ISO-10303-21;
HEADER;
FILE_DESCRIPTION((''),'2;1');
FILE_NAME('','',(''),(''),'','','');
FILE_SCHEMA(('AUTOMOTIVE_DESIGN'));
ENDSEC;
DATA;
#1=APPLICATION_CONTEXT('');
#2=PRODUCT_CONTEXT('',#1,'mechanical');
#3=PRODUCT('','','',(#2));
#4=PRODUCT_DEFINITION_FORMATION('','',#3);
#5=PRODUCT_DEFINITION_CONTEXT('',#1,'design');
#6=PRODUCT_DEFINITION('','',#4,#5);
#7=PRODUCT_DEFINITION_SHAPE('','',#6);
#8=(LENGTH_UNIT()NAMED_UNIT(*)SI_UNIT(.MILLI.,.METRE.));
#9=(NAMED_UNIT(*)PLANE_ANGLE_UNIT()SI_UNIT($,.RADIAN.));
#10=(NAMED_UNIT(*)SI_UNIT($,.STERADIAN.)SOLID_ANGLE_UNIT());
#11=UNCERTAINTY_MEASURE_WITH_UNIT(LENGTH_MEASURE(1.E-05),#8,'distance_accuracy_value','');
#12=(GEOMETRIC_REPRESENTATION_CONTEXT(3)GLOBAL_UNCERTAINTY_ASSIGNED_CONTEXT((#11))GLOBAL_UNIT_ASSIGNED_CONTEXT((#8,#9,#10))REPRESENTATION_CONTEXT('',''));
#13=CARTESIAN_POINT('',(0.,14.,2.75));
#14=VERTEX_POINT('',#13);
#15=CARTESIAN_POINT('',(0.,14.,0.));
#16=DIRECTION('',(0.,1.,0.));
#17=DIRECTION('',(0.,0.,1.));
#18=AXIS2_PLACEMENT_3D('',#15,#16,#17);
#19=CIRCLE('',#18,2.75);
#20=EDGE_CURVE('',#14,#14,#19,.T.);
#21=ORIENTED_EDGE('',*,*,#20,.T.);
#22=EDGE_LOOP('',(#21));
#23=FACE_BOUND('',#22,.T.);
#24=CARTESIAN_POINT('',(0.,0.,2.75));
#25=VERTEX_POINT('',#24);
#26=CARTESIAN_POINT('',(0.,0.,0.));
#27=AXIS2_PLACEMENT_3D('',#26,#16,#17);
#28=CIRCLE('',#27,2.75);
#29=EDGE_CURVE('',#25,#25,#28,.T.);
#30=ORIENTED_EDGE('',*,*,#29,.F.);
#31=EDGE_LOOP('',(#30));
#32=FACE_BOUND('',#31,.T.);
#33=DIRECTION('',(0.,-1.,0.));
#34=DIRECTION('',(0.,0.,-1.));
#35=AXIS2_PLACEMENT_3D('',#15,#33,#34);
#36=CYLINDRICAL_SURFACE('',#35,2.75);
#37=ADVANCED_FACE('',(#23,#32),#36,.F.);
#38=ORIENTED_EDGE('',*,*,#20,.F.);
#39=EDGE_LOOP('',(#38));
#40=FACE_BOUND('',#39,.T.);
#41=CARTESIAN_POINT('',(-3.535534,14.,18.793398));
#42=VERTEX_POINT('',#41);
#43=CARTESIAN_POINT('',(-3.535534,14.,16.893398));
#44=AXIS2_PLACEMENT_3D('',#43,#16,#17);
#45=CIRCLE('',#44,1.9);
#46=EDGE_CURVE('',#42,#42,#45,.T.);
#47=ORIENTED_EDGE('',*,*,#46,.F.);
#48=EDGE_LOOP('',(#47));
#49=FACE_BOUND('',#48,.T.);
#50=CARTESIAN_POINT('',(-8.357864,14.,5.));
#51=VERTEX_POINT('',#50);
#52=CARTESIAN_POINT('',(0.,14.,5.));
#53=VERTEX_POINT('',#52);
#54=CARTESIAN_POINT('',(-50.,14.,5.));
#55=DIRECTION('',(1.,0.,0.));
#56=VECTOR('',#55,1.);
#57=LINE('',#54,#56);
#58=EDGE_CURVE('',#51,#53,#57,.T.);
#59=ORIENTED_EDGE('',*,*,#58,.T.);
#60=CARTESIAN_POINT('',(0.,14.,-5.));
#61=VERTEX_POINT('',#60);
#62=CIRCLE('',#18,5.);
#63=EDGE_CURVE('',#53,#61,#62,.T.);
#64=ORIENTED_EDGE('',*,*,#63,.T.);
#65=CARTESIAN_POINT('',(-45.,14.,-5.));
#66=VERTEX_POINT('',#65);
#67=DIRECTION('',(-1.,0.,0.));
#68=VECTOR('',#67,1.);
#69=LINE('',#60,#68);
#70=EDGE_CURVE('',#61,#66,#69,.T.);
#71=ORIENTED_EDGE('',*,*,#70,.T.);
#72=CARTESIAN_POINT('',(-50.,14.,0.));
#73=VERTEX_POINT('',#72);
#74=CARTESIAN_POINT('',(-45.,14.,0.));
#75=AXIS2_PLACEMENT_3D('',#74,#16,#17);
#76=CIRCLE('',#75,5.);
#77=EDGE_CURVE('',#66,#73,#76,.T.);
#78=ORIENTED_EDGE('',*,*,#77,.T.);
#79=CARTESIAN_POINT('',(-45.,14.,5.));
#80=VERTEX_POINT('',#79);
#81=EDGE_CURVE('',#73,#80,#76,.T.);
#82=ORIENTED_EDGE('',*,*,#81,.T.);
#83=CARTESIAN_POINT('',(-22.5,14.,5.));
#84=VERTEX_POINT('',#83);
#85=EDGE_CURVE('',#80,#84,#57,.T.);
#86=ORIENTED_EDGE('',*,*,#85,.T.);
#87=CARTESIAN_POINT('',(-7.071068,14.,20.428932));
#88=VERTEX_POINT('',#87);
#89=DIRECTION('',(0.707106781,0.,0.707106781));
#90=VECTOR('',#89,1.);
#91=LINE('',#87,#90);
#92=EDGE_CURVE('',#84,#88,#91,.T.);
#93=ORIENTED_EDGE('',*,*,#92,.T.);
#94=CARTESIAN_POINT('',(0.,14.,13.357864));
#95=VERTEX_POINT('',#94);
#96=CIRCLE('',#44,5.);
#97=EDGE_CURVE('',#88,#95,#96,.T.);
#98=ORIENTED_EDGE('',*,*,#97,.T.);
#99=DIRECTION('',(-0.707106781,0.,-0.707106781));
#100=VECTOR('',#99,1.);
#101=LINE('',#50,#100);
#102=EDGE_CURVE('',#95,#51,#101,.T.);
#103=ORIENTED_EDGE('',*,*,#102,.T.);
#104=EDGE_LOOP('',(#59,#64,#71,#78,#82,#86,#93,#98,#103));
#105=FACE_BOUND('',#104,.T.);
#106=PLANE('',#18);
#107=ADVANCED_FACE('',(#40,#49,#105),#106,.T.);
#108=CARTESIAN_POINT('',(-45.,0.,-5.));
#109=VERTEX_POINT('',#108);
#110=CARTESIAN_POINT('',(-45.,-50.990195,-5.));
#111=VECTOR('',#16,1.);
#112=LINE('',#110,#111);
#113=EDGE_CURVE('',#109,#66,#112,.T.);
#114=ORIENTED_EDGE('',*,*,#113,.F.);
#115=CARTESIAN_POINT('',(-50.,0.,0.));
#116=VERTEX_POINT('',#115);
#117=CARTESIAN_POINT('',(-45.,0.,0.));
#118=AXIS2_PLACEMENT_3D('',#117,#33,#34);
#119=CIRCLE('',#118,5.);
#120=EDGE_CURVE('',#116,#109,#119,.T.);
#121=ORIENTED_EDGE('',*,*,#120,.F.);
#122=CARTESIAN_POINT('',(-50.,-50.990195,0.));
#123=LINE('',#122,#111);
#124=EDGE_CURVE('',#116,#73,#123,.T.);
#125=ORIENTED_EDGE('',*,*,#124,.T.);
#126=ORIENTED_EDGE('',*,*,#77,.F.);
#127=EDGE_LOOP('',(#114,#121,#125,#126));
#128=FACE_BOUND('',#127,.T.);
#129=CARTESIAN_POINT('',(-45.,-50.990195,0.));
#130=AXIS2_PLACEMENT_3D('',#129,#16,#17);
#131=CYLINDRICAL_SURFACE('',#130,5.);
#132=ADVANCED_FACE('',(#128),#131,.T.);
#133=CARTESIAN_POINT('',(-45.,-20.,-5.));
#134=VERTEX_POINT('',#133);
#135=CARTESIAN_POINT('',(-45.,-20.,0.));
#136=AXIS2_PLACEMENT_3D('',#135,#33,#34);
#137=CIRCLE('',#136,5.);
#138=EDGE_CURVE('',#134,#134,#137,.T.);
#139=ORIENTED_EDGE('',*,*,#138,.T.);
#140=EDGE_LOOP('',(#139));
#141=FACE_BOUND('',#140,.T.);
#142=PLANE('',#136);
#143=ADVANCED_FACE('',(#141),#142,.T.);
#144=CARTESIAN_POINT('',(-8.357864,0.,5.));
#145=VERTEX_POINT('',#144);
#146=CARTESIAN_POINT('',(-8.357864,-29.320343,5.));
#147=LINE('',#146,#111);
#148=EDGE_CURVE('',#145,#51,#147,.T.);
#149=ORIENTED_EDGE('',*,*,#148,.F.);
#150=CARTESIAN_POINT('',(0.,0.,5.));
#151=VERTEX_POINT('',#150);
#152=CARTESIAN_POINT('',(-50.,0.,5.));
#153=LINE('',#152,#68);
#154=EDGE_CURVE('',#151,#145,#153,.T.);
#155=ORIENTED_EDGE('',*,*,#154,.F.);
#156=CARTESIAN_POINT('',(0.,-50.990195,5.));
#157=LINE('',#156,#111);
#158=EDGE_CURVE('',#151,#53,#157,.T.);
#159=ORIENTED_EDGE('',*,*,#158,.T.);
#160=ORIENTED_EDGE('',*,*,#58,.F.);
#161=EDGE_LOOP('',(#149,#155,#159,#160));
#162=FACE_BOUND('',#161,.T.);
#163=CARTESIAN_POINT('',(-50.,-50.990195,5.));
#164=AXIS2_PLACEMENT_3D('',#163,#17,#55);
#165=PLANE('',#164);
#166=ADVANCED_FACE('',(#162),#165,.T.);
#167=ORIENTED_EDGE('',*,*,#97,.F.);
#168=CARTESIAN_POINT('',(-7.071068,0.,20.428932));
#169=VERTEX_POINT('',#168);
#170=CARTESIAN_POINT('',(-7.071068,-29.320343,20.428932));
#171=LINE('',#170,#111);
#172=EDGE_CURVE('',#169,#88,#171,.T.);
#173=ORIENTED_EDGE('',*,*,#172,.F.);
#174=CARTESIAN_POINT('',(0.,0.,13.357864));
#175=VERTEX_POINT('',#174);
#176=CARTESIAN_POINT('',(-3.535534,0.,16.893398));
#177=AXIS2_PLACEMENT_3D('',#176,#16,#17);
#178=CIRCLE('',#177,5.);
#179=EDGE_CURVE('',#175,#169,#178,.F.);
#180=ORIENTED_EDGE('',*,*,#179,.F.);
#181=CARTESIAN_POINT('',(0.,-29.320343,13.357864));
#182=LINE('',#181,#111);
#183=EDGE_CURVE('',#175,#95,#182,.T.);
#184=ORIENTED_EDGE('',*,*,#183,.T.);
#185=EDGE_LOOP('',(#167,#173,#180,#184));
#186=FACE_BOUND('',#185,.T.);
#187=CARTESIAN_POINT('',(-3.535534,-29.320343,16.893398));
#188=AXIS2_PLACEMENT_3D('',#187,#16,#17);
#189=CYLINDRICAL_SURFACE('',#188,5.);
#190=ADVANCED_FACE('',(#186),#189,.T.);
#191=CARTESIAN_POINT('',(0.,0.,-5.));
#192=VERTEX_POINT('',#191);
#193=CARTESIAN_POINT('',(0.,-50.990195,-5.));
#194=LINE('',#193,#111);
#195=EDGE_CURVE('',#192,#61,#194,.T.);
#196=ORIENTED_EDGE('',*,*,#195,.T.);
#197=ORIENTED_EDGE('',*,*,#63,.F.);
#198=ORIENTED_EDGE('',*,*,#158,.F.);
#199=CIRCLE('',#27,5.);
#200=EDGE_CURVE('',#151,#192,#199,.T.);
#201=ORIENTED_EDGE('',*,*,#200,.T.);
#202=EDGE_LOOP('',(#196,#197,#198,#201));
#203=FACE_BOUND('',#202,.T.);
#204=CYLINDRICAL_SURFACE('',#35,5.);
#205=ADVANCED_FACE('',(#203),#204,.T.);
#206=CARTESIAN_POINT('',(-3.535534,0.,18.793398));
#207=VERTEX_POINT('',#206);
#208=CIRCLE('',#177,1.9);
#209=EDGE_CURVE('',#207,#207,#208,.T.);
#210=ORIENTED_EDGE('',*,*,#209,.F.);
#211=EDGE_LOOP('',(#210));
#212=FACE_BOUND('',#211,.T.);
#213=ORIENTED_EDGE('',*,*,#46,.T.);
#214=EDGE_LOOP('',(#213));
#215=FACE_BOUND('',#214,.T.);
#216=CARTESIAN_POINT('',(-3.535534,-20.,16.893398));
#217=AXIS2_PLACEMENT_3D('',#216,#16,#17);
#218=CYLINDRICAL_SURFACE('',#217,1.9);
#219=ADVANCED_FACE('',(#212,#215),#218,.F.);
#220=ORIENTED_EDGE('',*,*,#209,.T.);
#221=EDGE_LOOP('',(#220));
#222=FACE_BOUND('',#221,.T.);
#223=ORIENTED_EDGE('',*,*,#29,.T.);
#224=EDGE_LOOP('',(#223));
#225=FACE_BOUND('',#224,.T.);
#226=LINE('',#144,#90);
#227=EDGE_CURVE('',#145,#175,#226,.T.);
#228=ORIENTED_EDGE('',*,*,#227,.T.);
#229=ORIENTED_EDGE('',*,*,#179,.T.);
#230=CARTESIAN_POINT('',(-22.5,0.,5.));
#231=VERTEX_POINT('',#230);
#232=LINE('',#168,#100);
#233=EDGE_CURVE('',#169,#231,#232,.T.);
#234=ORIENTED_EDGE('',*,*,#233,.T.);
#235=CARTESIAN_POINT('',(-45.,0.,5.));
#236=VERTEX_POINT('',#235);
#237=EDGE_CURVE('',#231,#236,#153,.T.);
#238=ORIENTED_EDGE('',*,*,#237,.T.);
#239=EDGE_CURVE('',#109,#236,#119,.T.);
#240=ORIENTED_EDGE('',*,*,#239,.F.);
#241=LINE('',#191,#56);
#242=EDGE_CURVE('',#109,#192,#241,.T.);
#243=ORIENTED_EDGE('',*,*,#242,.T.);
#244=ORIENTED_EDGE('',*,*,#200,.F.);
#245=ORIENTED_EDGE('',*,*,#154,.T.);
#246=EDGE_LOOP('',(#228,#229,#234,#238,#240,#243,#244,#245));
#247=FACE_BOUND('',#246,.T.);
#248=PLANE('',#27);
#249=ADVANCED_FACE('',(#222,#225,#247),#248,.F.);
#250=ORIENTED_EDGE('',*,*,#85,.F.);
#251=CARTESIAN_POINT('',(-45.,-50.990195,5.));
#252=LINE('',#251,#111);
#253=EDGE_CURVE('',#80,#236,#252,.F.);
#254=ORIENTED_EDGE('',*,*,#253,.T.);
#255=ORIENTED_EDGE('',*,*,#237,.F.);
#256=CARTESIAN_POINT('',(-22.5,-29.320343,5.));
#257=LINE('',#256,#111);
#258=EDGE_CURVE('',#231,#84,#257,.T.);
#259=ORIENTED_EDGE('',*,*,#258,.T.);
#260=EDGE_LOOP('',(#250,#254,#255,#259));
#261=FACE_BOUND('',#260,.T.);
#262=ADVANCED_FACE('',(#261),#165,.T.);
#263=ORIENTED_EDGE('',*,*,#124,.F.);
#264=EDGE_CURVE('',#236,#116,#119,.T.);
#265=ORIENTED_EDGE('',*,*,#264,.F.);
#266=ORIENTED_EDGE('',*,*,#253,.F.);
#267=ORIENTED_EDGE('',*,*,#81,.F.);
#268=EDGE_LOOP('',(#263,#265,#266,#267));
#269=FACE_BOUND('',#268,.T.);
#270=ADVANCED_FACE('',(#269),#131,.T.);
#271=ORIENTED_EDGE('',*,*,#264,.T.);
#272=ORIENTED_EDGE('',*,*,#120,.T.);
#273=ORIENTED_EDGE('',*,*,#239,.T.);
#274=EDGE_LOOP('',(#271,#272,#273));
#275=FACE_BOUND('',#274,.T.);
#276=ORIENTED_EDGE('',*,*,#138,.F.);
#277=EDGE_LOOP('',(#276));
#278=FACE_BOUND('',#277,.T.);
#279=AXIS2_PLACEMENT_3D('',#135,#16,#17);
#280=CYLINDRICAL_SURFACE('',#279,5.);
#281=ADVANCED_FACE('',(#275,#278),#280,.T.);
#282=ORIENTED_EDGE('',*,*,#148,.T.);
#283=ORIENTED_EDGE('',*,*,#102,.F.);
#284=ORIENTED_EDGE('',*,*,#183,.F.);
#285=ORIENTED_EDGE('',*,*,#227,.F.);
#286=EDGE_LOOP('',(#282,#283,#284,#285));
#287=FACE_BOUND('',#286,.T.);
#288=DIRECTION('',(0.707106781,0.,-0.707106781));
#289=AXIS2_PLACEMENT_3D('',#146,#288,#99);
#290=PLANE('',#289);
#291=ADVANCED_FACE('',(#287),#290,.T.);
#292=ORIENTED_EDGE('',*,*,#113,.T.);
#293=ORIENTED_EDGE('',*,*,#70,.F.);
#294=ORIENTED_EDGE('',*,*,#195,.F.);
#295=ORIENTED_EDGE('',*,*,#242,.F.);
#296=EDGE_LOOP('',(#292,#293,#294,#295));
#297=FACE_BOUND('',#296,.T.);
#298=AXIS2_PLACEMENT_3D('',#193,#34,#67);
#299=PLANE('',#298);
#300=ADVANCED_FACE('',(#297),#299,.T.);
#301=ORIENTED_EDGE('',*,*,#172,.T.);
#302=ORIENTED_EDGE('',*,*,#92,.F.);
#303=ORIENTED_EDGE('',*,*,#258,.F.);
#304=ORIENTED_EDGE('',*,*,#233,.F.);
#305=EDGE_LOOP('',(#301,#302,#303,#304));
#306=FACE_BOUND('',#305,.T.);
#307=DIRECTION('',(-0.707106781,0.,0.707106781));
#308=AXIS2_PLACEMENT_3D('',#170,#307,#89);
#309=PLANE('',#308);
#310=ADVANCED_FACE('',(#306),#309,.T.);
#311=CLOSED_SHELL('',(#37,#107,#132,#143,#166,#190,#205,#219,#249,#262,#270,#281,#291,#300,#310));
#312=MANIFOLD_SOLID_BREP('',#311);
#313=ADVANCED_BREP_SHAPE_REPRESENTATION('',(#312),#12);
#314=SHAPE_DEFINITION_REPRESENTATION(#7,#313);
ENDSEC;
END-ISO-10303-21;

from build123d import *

# Parameters (mm, degrees)
SKETCH1_R           = 5
SKETCH1_R_2         = 2.75
BOSS_EXTRUDE1_DEPTH = 14
BOSS_EXTRUDE2_START = -14
BOSS_EXTRUDE2_DEPTH = 14
SKETCH3_R           = 5
BOSS_EXTRUDE3_DEPTH = 20
FILLET2_R           = 5
BOSS_EXTRUDE4_DEPTH = 14
SKETCH5_R           = 1.9
CUT_EXTRUDE1_DEPTH  = 65.306460705


with BuildPart() as part:
    # Sketch1 → Boss-Extrude1 (new body)
    with BuildSketch(Plane(origin=(0, 0, 0), x_dir=(1, 0, 0), z_dir=(0, 1, 0))):
        with Locations(Location((0, 0, 0), (0, 0, 270))):
            Circle(SKETCH1_R)
        with Locations(Location((0, 0, 0), (0, 0, 270))):
            Circle(SKETCH1_R_2, mode=Mode.SUBTRACT)
    extrude(amount=BOSS_EXTRUDE1_DEPTH)

    # Sketch2 → Boss-Extrude2 (add)
    with BuildSketch(Plane(origin=(0, 14, 0), x_dir=(1, 0, 0), z_dir=(0, 1, 0)).offset(BOSS_EXTRUDE2_START)):
        with BuildLine():
            Line((0, 5), (-50, 5))
            Line((-50, 5), (-50, -5))
            Line((-50, -5), (0, -5))
            ThreePointArc((0, -5), (-5, 0), (0, 5))
        make_face()
    extrude(amount=BOSS_EXTRUDE2_DEPTH)

    # Sketch3 → Boss-Extrude3 (add)
    with BuildSketch(Plane.XZ):
        with Locations(Location((-45, 0, 0), (0, 0, 270))):
            Circle(SKETCH3_R)
    extrude(amount=BOSS_EXTRUDE3_DEPTH)

    # Fillet2
    fillet2_edges = [part.edges().sort_by_distance(p)[0] for p in [
        (-50, 7, -5),
        (-50, 7, 5),
    ]]
    fillet(fillet2_edges, radius=FILLET2_R - 0.0001)  # a hair under: the kernel refuses the full size

    # Sketch4 → Boss-Extrude4 (add)
    with BuildSketch(Plane(origin=(0, 14, 0), x_dir=(1, 0, 0), z_dir=(0, 1, 0))):
        with BuildLine():
            Line((-8.357864376, -5), (0, -13.357864376))
            ThreePointArc((0, -13.357864376), (0, -20.428932188), (-7.071067812, -20.428932188))
            Line((-7.071067812, -20.428932188), (-22.5, -5))
            Line((-22.5, -5), (-8.357864376, -5))
        make_face()
    extrude(amount=-BOSS_EXTRUDE4_DEPTH)

    # Sketch5 → Cut-Extrude1 (cut, through all)
    with BuildSketch(Plane(origin=(0, 14, 0), x_dir=(1, 0, 0), z_dir=(0, 1, 0))):
        with Locations(Location((-3.535533906, -16.893398282, 0), (0, 0, 270))):
            Circle(SKETCH5_R)
    extrude(amount=-CUT_EXTRUDE1_DEPTH, mode=Mode.SUBTRACT)


solid = part.part
